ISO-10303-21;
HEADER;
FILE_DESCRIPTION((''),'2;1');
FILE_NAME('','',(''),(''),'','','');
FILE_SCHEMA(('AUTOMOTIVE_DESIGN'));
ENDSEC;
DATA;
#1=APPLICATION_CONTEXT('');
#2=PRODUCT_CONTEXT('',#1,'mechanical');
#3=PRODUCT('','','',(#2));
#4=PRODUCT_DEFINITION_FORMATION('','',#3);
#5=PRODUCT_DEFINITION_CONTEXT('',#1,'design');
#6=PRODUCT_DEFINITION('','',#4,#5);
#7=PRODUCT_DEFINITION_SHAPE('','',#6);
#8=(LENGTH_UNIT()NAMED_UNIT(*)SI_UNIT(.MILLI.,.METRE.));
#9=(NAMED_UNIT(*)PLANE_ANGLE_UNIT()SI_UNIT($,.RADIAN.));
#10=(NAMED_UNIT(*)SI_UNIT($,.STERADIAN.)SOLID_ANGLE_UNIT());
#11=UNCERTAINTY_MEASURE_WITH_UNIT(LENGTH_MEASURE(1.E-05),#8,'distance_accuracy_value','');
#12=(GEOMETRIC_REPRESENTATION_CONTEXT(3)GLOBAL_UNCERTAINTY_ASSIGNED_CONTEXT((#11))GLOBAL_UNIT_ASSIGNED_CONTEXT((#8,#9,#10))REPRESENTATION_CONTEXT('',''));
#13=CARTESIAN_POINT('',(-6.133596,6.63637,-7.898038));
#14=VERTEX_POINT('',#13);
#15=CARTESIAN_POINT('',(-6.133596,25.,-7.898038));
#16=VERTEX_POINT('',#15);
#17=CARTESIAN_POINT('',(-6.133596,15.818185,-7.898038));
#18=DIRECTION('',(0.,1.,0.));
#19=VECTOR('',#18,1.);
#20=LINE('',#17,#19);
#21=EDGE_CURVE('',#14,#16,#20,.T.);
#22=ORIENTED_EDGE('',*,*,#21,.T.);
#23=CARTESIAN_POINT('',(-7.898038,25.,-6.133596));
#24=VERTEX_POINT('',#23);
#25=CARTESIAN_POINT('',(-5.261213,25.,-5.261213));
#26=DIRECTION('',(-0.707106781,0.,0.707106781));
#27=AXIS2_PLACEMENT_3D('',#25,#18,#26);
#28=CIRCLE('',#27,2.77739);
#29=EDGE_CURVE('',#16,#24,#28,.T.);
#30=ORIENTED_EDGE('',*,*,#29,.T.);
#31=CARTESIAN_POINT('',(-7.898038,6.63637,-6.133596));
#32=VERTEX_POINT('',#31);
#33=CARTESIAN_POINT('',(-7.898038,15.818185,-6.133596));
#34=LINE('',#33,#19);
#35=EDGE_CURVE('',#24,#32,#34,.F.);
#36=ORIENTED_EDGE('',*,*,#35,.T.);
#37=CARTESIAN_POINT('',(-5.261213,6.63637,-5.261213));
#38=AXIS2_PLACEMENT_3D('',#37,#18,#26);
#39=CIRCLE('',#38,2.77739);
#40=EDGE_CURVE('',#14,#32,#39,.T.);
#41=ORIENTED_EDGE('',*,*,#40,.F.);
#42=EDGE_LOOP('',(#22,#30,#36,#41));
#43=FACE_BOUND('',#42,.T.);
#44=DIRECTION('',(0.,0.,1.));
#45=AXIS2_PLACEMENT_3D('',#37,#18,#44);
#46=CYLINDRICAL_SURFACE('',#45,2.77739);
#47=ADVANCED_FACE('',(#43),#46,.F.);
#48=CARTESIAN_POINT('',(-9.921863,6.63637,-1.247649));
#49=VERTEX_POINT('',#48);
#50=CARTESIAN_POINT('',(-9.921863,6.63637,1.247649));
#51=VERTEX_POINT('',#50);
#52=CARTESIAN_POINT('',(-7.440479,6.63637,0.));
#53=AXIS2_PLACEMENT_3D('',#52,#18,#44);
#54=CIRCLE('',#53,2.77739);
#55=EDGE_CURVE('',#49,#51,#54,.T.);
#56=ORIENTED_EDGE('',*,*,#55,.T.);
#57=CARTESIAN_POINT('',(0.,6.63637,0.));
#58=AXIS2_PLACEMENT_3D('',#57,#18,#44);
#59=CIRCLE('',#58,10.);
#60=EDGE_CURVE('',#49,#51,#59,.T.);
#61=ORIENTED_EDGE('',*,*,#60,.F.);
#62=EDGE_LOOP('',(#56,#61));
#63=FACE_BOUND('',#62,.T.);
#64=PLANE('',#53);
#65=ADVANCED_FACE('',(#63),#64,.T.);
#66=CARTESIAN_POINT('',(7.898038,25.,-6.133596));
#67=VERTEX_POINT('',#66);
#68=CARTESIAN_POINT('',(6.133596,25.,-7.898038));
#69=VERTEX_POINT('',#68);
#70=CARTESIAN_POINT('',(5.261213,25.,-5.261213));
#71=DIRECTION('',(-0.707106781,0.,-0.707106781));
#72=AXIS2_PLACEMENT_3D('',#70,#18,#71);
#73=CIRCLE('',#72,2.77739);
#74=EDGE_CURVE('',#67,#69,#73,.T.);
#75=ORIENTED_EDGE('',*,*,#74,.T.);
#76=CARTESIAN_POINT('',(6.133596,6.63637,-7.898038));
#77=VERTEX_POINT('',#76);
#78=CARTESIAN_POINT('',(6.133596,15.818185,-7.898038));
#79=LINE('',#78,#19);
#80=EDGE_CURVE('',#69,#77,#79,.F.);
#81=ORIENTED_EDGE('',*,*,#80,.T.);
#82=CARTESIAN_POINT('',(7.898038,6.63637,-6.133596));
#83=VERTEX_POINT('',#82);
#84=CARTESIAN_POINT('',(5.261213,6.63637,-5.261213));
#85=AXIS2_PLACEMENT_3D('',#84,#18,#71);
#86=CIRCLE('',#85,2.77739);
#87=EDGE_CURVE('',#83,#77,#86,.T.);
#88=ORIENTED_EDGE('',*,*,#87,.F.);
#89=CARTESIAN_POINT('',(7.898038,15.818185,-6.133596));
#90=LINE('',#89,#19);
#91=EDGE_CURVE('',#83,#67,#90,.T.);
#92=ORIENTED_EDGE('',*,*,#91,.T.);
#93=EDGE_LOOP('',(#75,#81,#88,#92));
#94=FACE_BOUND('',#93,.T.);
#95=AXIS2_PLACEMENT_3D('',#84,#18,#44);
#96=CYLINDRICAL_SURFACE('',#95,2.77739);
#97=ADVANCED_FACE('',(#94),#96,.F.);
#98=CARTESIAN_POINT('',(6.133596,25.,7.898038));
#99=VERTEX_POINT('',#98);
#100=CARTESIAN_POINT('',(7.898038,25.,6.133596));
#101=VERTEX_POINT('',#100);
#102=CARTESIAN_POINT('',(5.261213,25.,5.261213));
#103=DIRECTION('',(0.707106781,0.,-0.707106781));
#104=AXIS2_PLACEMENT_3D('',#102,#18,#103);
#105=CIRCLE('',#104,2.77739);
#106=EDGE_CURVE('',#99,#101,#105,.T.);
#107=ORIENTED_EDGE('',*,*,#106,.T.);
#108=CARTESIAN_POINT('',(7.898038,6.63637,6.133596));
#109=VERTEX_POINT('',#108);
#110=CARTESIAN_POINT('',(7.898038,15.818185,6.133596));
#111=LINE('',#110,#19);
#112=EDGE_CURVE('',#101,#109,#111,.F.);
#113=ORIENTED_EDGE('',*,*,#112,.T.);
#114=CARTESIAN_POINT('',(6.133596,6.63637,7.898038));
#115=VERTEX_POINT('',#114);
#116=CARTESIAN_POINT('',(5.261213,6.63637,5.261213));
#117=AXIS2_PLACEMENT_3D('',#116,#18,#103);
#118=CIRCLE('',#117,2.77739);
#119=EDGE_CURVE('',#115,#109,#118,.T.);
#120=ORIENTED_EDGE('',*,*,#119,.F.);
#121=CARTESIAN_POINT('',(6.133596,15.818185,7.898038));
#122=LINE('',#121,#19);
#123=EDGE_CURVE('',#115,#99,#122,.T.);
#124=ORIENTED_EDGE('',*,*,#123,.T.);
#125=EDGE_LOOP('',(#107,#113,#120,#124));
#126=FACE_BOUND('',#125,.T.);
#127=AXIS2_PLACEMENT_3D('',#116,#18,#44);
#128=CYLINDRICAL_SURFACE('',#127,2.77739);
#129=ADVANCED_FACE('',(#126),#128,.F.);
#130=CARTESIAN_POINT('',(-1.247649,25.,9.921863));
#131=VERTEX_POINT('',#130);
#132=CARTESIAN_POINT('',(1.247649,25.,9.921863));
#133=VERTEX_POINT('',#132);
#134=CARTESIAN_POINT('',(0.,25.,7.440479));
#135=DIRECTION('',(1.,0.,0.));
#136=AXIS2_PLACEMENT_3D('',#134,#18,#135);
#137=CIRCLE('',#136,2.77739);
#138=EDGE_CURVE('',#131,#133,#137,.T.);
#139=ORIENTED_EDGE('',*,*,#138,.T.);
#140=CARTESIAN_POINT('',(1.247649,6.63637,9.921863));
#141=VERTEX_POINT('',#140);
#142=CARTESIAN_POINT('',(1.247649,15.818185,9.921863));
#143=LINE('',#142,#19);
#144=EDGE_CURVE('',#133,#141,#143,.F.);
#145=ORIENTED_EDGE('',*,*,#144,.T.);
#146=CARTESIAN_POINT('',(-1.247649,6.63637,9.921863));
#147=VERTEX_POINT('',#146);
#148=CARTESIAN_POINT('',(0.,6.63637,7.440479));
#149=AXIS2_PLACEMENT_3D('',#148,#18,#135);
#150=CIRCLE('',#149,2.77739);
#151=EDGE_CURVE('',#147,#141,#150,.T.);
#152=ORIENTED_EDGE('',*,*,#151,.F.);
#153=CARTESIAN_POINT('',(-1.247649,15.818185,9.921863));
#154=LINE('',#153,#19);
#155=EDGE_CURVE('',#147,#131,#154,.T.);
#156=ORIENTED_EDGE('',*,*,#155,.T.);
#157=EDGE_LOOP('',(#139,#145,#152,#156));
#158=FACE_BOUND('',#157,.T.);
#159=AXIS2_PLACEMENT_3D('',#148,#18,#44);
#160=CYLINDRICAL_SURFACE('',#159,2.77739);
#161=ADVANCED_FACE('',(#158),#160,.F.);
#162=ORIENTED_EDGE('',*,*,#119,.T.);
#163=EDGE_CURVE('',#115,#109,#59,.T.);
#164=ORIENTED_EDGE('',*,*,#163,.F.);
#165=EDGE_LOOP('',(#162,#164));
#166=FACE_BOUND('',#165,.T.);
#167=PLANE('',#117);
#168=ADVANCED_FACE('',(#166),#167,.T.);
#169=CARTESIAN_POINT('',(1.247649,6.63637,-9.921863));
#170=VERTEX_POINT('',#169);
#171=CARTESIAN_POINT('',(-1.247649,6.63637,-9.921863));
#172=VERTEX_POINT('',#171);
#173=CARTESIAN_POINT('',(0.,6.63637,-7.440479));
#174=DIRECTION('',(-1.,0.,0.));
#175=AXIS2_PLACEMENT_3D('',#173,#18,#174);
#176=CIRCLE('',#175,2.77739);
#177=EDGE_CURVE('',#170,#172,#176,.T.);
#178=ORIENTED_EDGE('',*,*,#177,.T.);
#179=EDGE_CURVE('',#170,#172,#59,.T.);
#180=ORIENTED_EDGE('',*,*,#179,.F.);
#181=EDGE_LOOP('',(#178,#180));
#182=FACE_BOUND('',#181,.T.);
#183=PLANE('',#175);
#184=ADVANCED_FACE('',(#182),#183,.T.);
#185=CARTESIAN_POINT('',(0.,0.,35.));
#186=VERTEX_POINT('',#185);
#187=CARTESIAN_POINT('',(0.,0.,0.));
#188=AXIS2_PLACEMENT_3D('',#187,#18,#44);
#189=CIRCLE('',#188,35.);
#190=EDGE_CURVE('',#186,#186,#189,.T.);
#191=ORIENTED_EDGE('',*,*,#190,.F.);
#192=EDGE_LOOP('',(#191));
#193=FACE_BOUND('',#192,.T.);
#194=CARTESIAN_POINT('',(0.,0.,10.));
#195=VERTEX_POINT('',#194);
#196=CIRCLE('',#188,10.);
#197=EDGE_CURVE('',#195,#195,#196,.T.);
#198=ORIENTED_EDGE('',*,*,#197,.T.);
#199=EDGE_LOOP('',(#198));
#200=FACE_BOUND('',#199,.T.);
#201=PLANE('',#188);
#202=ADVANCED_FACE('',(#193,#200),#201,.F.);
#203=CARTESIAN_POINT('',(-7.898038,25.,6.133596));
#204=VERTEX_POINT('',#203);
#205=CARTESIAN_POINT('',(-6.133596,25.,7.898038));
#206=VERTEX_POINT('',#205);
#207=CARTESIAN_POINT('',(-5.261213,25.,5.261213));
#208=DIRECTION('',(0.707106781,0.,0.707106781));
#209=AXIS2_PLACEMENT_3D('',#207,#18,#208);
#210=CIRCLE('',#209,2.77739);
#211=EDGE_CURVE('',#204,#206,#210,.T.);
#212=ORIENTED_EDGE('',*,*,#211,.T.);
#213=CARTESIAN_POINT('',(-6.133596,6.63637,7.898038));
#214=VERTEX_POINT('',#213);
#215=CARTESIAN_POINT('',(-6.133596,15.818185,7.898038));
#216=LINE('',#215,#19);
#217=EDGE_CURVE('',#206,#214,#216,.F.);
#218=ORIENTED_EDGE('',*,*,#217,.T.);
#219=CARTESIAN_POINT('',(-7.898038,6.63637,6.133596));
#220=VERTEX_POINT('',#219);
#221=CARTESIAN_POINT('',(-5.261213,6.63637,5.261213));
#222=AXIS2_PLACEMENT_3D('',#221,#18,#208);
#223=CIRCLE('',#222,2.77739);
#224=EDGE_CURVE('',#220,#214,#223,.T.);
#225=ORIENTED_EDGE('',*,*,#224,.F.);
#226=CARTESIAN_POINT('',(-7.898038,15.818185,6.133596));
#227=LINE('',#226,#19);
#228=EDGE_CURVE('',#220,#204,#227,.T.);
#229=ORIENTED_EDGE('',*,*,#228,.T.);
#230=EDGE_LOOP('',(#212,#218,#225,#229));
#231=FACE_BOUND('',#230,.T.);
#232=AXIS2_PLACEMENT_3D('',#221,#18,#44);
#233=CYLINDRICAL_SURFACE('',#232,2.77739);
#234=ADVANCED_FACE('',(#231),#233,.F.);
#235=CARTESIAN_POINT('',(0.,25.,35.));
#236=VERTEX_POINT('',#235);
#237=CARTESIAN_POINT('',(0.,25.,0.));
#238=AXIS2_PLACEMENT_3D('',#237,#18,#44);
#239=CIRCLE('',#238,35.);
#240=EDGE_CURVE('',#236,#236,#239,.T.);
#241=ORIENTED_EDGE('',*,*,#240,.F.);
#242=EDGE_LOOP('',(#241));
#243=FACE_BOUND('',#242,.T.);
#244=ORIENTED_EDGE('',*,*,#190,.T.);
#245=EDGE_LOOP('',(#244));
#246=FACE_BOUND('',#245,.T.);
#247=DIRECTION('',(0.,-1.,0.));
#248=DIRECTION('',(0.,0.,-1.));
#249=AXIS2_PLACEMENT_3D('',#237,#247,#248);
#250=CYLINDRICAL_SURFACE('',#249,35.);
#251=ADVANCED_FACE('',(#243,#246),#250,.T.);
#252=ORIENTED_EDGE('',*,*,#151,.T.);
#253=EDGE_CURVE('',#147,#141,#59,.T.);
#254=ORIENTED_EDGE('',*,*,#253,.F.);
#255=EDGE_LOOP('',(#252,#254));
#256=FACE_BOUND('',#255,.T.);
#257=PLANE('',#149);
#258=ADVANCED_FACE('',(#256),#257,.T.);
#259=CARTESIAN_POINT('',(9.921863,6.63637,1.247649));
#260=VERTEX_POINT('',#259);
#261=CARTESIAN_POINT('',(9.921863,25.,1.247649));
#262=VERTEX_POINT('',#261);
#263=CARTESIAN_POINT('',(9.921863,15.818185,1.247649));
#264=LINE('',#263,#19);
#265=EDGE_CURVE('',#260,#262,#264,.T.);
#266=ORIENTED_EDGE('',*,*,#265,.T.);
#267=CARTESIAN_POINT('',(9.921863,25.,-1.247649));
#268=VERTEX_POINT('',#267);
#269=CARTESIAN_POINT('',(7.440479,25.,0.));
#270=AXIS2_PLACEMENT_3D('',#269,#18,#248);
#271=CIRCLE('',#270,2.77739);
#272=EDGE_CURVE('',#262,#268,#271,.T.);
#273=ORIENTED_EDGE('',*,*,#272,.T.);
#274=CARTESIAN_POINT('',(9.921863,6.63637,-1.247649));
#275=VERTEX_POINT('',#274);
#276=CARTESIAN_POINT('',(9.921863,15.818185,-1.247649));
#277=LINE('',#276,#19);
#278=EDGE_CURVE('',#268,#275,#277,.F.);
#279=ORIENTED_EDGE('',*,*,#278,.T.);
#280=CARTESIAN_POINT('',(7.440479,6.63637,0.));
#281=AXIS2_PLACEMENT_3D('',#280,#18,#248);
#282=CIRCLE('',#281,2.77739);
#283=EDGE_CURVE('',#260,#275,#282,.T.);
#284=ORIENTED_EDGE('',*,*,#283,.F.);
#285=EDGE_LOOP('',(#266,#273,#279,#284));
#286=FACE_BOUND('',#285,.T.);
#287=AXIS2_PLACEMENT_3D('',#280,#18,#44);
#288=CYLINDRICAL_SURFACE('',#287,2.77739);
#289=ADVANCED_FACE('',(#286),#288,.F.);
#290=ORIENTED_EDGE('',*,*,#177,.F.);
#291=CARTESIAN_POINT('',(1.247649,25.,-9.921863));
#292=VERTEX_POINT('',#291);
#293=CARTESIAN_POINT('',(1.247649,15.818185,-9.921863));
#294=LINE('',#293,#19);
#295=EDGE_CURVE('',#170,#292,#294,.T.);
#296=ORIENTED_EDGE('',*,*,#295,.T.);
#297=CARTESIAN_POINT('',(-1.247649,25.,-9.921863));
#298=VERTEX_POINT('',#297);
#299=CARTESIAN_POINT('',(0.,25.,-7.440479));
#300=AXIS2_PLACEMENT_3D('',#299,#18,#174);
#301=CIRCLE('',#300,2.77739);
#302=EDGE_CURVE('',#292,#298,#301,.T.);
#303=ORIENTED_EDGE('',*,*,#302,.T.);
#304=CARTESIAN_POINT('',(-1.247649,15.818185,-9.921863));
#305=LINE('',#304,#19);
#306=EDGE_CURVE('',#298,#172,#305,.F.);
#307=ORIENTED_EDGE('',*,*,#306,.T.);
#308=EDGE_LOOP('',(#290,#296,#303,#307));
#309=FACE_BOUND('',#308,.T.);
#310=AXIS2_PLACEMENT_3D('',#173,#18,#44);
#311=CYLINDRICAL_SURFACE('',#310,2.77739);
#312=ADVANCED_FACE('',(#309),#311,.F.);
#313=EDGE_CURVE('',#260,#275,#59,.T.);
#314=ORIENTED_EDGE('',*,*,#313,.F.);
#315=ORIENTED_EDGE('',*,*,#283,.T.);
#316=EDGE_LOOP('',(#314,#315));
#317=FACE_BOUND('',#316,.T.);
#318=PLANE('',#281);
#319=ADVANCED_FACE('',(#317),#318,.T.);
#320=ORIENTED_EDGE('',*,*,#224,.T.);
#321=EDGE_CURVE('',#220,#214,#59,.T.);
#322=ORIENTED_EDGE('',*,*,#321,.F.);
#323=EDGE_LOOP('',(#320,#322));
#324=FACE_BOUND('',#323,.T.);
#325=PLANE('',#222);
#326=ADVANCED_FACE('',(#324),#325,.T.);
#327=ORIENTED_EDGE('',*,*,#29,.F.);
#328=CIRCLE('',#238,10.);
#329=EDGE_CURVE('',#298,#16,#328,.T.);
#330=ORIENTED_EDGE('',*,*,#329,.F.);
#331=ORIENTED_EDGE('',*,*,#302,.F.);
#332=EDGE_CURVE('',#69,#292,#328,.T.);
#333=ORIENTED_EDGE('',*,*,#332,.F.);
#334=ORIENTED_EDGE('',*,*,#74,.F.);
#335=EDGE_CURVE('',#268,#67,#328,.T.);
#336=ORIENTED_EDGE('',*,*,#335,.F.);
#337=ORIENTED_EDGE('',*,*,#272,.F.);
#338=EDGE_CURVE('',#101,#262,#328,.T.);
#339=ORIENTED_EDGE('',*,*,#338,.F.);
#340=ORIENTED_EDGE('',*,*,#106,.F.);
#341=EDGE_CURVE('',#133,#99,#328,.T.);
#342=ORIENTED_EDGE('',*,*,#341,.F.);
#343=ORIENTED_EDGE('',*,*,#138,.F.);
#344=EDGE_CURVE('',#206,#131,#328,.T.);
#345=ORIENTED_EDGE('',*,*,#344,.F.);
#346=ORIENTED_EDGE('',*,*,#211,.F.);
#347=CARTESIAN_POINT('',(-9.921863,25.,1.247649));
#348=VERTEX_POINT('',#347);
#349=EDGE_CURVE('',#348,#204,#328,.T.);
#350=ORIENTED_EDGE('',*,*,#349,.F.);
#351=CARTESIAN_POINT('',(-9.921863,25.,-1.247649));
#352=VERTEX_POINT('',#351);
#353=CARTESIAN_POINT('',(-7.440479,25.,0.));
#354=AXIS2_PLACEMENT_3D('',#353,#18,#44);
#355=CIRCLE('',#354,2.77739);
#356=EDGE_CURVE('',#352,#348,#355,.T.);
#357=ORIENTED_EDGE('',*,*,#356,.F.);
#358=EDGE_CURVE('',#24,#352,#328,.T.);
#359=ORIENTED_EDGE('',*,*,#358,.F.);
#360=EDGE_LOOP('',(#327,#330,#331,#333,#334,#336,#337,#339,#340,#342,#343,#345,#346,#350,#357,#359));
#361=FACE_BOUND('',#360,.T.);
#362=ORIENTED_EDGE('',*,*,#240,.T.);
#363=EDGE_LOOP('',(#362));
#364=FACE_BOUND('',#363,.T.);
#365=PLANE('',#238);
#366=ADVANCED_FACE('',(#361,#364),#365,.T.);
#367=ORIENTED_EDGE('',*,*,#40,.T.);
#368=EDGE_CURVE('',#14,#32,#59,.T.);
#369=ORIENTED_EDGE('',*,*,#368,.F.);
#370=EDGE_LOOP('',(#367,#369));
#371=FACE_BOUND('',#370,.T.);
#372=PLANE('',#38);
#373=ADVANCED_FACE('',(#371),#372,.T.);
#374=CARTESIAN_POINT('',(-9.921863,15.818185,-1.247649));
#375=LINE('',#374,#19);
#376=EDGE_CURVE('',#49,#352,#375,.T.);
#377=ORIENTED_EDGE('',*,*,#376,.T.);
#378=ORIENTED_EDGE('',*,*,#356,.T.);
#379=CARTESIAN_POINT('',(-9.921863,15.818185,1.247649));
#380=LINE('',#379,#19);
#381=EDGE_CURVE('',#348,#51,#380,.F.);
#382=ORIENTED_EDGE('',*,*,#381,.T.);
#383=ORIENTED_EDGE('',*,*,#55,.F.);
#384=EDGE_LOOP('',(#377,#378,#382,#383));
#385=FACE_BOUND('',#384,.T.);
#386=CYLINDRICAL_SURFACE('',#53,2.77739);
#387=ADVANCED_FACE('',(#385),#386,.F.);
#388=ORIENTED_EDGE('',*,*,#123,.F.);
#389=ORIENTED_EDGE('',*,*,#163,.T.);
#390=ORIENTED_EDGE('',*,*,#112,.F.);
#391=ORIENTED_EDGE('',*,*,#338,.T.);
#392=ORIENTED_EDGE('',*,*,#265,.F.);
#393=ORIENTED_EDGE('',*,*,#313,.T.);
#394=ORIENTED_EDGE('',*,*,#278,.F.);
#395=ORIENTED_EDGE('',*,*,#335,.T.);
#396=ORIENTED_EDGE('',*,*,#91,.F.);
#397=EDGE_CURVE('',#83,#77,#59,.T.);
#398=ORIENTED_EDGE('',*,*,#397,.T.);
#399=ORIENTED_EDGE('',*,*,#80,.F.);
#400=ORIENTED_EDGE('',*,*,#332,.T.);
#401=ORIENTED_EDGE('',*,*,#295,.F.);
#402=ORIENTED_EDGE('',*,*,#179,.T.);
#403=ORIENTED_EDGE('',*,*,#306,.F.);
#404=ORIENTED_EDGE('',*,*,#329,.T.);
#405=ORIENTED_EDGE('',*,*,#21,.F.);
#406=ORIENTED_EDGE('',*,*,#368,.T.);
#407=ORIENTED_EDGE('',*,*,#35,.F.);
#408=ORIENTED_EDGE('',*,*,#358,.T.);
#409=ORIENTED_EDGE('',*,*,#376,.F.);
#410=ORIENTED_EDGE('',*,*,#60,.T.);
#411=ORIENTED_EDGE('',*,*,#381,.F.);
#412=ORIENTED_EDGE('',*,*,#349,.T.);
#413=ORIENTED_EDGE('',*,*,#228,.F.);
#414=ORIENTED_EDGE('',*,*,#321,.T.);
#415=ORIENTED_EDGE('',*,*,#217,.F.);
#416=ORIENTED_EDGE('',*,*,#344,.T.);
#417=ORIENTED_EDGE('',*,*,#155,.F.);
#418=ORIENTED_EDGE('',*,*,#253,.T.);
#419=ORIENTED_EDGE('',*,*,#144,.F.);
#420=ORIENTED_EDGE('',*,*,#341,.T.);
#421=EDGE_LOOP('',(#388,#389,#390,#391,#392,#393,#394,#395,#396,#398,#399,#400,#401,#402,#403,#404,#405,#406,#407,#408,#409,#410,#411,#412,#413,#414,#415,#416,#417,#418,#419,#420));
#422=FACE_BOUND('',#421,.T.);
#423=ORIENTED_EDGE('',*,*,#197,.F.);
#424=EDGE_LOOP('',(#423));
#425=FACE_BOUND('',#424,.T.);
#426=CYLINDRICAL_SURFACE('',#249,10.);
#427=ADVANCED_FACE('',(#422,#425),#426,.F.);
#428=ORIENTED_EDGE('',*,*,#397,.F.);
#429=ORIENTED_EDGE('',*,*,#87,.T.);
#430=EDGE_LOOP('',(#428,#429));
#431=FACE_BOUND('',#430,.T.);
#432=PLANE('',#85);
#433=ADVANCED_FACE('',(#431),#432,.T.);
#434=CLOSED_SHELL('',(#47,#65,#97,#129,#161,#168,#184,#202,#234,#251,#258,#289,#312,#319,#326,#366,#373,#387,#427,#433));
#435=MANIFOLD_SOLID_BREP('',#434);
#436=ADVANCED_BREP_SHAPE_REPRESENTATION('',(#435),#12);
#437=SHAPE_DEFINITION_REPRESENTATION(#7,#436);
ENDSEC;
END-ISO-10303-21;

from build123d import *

# Parameters (mm, degrees)
SKETCH1_R           = 35
BOSS_EXTRUDE1_DEPTH = 25
SKETCH2_R           = 10
CUT_EXTRUDE1_DEPTH  = 56.452682532
SKETCH3_R           = 2.777390055
CUT_EXTRUDE2_DEPTH  = 18.363630356
CIRPATTERN1_COUNT   = 8


with BuildPart() as part:
    # Sketch1 → Boss-Extrude1 (new body)
    with BuildSketch(Plane(origin=(0, 0, 0), x_dir=(1, 0, 0), z_dir=(0, 1, 0))):
        Circle(SKETCH1_R)
    extrude(amount=BOSS_EXTRUDE1_DEPTH)

    # Sketch2 → Cut-Extrude1 (cut, through all)
    with BuildSketch(Plane(origin=(0, 0, 0), x_dir=(1, 0, 0), z_dir=(0, 1, 0))):
        Circle(SKETCH2_R)
    extrude(amount=CUT_EXTRUDE1_DEPTH, mode=Mode.SUBTRACT)

    # Sketch3 → Cut-Extrude2 (cut)
    with BuildSketch(Plane(origin=(0, 25, 0), x_dir=(1, 0, 0), z_dir=(0, 1, 0))):
        with Locations((-7.440479207, 0)):
            Circle(SKETCH3_R)
    cut_extrude2 = extrude(amount=-CUT_EXTRUDE2_DEPTH, mode=Mode.SUBTRACT)

    # CirPattern1: Cut-Extrude2 ×8 about axis
    cirpattern1_axis = Axis((0, 0, 0), (0, 1, 0))
    for i in range(1, CIRPATTERN1_COUNT):
        add(cut_extrude2.rotate(cirpattern1_axis, i * 360 / CIRPATTERN1_COUNT), mode=Mode.SUBTRACT)


solid = part.part
